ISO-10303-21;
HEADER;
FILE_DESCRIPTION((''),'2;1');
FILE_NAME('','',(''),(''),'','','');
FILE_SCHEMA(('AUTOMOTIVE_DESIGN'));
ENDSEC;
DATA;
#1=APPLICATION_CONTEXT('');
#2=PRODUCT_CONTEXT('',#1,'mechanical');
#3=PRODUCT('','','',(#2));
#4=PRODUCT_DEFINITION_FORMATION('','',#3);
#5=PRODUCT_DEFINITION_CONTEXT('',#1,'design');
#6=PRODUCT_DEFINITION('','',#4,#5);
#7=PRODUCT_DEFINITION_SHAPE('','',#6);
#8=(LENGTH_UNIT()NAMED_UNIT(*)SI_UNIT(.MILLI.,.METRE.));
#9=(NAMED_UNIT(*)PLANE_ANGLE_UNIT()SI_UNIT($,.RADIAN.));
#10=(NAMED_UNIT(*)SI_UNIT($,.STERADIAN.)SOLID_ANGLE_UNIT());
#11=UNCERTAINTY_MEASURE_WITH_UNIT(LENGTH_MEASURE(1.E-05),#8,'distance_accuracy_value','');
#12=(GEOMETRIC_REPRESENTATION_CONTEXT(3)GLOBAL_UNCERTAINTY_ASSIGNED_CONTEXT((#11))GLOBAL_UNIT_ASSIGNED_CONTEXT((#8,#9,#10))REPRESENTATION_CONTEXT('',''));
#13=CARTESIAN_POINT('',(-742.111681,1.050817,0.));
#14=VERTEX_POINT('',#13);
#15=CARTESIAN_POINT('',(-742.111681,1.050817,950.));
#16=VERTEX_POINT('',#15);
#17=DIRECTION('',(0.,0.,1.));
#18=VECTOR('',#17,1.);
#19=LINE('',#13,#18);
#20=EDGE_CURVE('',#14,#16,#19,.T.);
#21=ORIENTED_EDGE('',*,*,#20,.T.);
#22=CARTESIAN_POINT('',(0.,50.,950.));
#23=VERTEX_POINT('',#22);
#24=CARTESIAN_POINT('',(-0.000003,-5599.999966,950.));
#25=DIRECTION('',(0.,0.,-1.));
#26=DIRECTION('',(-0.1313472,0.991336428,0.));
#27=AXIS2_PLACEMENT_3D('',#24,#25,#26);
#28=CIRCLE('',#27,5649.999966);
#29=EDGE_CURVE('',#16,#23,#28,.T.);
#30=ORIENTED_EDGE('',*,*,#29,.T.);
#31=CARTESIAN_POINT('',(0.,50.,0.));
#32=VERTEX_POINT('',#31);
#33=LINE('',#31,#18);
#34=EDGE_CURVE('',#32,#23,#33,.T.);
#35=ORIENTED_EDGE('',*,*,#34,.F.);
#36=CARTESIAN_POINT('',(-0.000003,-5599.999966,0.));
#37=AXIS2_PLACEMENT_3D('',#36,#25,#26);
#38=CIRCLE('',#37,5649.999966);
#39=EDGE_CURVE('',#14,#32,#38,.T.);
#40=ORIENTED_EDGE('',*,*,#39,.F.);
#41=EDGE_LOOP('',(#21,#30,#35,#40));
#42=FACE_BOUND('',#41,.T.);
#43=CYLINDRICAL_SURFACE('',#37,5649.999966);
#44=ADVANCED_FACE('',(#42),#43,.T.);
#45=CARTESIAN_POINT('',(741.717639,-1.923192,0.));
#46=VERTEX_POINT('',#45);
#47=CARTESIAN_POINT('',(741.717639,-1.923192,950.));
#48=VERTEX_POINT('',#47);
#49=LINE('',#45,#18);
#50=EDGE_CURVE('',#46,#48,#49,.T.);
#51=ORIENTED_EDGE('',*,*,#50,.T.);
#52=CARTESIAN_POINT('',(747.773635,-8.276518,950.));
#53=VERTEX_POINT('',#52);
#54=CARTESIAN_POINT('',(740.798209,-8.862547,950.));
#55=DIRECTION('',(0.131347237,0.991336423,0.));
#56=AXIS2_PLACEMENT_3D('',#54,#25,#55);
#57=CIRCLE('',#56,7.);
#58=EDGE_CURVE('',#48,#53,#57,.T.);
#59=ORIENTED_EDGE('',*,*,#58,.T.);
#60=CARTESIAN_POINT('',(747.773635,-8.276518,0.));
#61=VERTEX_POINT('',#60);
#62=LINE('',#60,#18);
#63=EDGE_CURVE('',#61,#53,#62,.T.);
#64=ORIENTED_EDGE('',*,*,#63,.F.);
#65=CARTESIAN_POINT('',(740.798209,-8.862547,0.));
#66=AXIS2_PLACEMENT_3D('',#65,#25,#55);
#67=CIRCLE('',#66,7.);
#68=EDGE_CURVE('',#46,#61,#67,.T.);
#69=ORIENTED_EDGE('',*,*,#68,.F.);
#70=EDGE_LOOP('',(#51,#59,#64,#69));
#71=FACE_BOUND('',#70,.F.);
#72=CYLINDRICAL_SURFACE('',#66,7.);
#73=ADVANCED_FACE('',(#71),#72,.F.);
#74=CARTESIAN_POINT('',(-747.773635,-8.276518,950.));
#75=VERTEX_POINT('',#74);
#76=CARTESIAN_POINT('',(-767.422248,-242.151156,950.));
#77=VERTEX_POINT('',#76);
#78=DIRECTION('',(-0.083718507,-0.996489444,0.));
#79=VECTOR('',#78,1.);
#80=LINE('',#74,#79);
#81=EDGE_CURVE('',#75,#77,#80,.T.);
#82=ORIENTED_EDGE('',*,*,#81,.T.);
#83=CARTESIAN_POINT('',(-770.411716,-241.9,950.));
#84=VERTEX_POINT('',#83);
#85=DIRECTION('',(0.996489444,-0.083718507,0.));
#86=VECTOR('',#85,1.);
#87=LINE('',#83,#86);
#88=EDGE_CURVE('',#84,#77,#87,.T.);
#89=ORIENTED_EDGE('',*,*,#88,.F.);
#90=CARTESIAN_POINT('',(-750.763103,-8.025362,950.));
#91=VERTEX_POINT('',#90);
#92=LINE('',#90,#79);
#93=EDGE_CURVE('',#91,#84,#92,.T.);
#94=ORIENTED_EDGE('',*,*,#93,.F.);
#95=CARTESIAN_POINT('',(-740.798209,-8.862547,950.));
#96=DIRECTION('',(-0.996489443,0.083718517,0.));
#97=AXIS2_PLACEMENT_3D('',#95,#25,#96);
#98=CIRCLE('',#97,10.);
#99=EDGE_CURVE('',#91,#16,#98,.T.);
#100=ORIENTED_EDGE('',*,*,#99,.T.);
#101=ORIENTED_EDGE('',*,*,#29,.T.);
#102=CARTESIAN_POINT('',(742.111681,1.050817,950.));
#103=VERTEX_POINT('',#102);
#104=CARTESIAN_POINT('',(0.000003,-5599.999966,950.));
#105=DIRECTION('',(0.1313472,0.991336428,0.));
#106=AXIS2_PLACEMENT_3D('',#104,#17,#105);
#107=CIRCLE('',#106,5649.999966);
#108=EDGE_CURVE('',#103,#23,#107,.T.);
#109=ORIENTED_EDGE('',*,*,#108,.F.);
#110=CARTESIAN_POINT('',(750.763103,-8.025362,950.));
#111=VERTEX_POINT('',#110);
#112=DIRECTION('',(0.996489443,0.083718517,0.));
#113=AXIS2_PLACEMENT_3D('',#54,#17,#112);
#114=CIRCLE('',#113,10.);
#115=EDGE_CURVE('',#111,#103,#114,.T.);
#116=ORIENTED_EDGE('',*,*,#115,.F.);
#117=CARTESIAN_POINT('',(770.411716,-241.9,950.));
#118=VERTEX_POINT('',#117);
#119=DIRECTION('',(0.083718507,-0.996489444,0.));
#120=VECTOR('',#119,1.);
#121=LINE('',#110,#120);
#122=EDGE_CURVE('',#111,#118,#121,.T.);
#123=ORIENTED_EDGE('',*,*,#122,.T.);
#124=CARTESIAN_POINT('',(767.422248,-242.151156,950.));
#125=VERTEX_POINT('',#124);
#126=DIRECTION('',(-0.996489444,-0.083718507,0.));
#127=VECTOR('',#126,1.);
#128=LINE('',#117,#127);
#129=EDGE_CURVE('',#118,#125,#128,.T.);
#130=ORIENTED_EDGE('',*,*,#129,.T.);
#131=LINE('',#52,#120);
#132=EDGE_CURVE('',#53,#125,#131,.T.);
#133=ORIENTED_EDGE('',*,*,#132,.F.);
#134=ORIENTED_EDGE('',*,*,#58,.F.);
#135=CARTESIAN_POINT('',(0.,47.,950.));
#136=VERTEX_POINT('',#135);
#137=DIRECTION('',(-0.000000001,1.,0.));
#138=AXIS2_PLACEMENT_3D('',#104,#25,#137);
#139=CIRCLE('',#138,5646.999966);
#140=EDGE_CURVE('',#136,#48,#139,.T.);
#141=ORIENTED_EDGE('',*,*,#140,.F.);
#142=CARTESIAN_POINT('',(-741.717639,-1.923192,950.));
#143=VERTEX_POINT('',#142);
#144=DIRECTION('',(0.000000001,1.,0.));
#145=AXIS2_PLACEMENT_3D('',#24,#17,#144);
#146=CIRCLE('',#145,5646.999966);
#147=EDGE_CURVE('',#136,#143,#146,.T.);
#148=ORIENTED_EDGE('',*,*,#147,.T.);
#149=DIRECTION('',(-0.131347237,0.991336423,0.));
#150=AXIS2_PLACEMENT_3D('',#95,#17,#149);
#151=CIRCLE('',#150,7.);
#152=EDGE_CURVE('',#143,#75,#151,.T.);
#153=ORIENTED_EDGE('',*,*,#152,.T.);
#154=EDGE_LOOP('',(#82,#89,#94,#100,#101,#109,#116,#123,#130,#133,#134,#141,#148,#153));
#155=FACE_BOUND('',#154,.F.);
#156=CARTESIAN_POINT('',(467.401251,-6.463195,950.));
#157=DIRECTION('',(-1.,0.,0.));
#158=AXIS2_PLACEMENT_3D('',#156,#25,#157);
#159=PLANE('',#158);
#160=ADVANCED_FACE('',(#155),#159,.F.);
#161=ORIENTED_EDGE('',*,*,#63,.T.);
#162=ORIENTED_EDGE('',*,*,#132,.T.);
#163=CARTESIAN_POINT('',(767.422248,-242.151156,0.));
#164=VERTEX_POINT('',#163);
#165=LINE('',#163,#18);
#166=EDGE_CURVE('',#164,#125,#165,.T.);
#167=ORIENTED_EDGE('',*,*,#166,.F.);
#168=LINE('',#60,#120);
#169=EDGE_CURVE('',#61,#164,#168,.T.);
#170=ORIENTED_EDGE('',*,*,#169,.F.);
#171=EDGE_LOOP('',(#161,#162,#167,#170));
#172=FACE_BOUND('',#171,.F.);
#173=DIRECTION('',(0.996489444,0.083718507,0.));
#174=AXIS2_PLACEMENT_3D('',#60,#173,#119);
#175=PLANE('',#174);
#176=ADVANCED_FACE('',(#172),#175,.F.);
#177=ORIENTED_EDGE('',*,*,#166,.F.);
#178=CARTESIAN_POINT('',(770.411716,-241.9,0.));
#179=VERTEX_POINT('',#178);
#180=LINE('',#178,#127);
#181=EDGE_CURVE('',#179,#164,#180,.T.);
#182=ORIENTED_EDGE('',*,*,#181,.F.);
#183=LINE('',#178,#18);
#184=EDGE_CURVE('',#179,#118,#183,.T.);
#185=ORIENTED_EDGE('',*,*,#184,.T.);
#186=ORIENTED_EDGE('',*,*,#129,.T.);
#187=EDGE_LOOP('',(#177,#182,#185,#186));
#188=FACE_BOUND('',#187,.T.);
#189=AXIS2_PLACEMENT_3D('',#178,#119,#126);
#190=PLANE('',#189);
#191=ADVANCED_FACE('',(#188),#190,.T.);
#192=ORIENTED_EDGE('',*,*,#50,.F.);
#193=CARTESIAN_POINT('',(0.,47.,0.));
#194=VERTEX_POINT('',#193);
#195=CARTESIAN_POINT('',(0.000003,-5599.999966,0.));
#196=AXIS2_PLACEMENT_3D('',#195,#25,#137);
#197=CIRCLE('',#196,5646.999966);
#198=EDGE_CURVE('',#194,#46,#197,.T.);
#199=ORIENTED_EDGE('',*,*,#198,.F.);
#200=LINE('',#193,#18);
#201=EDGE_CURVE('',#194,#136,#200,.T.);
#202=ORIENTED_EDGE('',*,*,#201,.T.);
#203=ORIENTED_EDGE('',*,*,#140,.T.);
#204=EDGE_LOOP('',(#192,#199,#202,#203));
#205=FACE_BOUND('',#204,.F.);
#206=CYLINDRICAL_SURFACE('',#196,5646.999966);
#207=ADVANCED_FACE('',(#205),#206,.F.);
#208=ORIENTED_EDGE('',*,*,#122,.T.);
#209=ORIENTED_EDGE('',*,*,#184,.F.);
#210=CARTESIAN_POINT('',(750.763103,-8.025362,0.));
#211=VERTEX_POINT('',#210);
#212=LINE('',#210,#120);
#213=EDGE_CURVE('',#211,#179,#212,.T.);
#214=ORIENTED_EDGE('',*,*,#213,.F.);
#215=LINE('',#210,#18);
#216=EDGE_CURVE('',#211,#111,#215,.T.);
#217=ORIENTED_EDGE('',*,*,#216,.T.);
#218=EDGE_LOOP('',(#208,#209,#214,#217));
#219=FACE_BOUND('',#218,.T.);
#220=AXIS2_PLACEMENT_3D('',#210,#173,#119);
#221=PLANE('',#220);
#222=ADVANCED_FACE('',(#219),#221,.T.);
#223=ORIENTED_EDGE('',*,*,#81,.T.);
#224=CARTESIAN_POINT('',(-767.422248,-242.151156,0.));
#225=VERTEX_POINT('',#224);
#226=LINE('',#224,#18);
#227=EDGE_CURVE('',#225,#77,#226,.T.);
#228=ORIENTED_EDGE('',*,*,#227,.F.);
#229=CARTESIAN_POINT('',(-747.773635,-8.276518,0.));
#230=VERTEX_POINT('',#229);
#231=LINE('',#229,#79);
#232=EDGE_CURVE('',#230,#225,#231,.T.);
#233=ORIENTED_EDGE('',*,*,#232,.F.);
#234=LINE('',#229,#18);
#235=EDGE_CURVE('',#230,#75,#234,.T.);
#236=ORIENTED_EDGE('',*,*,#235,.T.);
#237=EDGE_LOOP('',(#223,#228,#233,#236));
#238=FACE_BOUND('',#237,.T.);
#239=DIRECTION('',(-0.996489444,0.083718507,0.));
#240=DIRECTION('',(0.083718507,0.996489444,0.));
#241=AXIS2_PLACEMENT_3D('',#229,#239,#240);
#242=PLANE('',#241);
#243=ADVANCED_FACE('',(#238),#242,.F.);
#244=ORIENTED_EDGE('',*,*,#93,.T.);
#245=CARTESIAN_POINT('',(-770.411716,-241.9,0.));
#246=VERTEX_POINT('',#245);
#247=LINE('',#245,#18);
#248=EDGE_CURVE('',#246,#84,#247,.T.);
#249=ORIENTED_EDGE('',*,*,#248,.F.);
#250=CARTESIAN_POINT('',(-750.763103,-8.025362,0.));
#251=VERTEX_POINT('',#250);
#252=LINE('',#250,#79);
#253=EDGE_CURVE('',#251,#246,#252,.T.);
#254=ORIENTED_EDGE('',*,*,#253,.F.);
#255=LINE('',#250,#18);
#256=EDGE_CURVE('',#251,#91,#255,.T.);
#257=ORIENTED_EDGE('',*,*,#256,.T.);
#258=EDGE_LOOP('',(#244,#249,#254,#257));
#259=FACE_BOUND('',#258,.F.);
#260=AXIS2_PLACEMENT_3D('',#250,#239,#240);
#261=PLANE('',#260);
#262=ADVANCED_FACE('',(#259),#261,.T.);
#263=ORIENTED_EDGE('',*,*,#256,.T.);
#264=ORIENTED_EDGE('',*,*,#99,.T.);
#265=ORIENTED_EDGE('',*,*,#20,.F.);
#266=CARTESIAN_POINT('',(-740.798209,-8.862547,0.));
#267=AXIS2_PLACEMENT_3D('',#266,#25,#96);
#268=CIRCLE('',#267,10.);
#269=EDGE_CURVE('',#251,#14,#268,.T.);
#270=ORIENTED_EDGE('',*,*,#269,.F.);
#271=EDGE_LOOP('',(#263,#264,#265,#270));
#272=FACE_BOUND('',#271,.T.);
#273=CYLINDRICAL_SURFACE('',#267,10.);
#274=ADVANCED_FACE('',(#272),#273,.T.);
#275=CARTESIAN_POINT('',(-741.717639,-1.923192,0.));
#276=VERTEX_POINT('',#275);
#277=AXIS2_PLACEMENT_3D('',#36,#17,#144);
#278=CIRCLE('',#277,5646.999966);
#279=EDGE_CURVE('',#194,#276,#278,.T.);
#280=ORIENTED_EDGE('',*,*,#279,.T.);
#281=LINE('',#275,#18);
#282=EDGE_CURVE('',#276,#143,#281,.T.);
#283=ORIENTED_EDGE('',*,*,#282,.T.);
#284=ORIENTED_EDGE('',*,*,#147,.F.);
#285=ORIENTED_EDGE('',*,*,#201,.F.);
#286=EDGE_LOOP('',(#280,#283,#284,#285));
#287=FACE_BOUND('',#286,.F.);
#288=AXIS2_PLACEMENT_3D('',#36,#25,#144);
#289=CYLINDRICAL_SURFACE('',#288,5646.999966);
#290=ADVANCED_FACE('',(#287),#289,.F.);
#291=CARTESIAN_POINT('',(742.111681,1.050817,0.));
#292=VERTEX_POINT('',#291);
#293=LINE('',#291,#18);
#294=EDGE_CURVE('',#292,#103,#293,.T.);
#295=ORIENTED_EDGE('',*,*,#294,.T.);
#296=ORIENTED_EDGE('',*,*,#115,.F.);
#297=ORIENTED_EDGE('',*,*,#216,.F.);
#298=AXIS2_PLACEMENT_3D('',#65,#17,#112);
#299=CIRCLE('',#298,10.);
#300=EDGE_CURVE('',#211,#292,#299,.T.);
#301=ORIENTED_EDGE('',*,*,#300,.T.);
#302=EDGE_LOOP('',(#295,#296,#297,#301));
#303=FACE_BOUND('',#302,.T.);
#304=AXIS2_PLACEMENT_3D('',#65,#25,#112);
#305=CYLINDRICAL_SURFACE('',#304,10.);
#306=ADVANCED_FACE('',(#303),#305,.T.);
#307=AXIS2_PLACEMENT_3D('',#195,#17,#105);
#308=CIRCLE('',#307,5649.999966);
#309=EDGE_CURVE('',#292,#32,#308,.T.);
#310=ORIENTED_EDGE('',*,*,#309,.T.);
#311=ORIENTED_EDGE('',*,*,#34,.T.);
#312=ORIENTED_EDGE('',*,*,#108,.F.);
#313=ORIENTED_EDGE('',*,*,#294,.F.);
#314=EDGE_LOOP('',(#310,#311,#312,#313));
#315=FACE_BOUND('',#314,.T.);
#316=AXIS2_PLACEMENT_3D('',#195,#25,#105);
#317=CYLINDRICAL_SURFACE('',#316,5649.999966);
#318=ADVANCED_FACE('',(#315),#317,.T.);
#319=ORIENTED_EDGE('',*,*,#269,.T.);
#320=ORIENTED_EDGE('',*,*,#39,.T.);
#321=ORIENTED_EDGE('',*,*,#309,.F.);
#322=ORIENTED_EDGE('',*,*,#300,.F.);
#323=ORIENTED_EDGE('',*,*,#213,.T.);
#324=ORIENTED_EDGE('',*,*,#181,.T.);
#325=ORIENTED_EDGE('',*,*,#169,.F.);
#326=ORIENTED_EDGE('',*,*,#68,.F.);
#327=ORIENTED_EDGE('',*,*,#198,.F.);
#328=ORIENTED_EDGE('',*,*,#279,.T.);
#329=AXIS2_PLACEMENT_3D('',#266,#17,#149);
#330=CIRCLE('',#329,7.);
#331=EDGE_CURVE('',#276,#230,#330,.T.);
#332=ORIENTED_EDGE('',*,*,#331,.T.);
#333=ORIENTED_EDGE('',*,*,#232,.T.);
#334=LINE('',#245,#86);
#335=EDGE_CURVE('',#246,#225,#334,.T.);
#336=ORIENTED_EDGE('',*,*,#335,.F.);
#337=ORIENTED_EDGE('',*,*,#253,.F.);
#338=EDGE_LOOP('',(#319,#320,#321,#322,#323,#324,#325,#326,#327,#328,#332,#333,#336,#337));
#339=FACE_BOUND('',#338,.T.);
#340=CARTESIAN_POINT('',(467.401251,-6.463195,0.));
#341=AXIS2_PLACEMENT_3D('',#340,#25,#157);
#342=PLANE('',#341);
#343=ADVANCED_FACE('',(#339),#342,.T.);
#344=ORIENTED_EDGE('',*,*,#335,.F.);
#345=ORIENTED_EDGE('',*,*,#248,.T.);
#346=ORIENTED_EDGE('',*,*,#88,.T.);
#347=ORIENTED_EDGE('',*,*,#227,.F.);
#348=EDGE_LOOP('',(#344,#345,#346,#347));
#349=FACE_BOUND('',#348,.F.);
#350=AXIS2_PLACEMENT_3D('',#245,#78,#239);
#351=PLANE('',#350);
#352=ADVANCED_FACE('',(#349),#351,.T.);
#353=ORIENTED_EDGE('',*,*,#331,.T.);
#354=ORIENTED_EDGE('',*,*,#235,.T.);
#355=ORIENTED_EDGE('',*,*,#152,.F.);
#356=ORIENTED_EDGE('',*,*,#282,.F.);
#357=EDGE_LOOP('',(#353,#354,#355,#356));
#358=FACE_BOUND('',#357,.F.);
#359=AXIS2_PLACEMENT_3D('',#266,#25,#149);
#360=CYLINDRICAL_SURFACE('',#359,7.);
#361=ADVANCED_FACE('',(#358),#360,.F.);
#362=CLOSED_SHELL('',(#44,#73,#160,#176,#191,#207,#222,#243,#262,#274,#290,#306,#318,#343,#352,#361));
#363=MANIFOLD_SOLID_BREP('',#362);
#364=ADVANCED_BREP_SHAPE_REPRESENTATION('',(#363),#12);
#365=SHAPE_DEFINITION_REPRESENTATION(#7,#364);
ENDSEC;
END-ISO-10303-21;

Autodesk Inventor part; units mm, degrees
ref_plane "YZ Plane" through (0, 0, 0) normal (1, 0, 0) x (0, 1, 0)
ref_plane "XZ Plane" through (0, 0, 0) normal (0, 1, 0) x (-1, 0, 0)
ref_plane "XY Plane" through (0, 0, 0) normal (0, 0, 1) x (1, 0, 0)
sketch "Sketch1" plane through (0, 0, 0) normal (0, 0, 1) x (1, 0, 0)
  line L0 (-750, 0) -> (750, 0) construction
  line L1 (750, 0) -> (750, -2700) construction
  line L2 (750, -2700) -> (-750, -2700) construction
  line L3 (-750, -2700) -> (-750, 0) construction
  line L4 (800, 50) -> (-800, 50) construction
  line L5 (-800, 50) -> (-800, -2750) construction
  line L6 (-800, -2750) -> (800, -2750) construction
  line L7 (800, -2750) -> (800, 50) construction
  line L8 (-850, 100) -> (850, 100) construction
  line L9 (850, 100) -> (850, -2800) construction
  line L10 (850, -2800) -> (-850, -2800) construction
  line L11 (-850, -2800) -> (-850, 100) construction
  arc A0 (750, 0) -> (742.111681, 1.050817) centre (0, -5600) ccw construction
  line L12 (-750, -2100) -> (750, -2100) construction
  line L13 (115.485997, -2697.8227) -> (750, -2100) construction
  arc A1 (750, -2100) -> (750, 0) centre (-10250, -1050) ccw construction
  arc A2 (110, -2700) -> (115.485997, -2697.8227) centre (110, -2692) ccw construction
  arc A3 (742.111681, 1.050817) -> (0, 50) centre (0, -5600) ccw
  line L14 (0, 100) -> (0, 50) construction
  line L15 (0, -2700) -> (0, -2697) construction
  line L16 (0, 47) -> (0, 0) construction
  line L17 (0, 50) -> (0, 47) construction
  line L18 (750.763103, -8.025362) -> (770.411716, -241.9)
  arc A4 (750.763103, -8.025362) -> (742.111681, 1.050817) centre (740.798209, -8.862547) ccw
  point P0 (0, -2750)
  dimension "d54" = 1500
  dimension "d55" = 2700
  dimension "d58" = 2100
  dimension "d83" = 8
  dimension "d113" = 50
  dimension "d114" = 50
  dimension "d115" = 3
  dimension "d121" = 10
  dimension "d122" = 241.9
  dimension "d124" = 94.8023
contour flange "Contour Flange2" sketch "Sketch1" thickness 3 bend radius 5 width 950 along (0, 0, 1) mid plane no both sides no wall seen from (760.58741, -124.962681, 0) lies toward (-0.9964894, -0.0837185, 0) curves L18 A4 A3
bend "Bend2"
corner "Corner2"
mirror "Mirror2" about plane through (0, 0, 0) normal (1, 0, 0)
sketch "Sketch2" plane through (747.773635, -8.276518, 0) normal (-0.9964894, -0.0837185, 0) x (0, 0, 1)
  line L0 (931.668513, -217.277497) -> (809.542302, -217.277497) construction
  line L1 (809.542302, -217.277497) -> (809.542302, -193.633612) construction
  line L2 (809.542302, -193.633612) -> (931.668513, -193.633612) construction
  line L3 (931.668513, -193.633612) -> (931.668513, -217.277497) construction
  point P0 (0, 70.849954)
mark "Mark1"
equation "\"d36\" = Thickness"
equation "\"d37\" = BendReliefWidth"
equation "\"d38\" = BendReliefDepth"
equation "\"d39\" = MinimumRemnant"
equation "\"d40\" = TransitionRadius"
equation "\"d42\" = BendRadius"
equation "\"d44\" = CornerReliefSize"
equation "\"d45\" = GapSize"
equation "\"d46\" = JacobiRadiusSize"
equation "\"BendReliefWidth\" = Thickness"
equation "\"BendReliefDepth\" = 0.5 * Thickness"
equation "\"CornerReliefSize\" = 4 * Thickness"
equation "\"MinimumRemnant\" = 2 * Thickness"
equation "\"GapSize\" = Thickness"
equation "\"Thickness\" = 3"
equation "\"TransitionRadius\" = 5"
equation "\"BendRadius\" = 5"
equation "\"JacobiRadiusSize\" = 5"
properties part number "MSC 208 SHEET BACK START" material "Stainless Steel AISI 304"
